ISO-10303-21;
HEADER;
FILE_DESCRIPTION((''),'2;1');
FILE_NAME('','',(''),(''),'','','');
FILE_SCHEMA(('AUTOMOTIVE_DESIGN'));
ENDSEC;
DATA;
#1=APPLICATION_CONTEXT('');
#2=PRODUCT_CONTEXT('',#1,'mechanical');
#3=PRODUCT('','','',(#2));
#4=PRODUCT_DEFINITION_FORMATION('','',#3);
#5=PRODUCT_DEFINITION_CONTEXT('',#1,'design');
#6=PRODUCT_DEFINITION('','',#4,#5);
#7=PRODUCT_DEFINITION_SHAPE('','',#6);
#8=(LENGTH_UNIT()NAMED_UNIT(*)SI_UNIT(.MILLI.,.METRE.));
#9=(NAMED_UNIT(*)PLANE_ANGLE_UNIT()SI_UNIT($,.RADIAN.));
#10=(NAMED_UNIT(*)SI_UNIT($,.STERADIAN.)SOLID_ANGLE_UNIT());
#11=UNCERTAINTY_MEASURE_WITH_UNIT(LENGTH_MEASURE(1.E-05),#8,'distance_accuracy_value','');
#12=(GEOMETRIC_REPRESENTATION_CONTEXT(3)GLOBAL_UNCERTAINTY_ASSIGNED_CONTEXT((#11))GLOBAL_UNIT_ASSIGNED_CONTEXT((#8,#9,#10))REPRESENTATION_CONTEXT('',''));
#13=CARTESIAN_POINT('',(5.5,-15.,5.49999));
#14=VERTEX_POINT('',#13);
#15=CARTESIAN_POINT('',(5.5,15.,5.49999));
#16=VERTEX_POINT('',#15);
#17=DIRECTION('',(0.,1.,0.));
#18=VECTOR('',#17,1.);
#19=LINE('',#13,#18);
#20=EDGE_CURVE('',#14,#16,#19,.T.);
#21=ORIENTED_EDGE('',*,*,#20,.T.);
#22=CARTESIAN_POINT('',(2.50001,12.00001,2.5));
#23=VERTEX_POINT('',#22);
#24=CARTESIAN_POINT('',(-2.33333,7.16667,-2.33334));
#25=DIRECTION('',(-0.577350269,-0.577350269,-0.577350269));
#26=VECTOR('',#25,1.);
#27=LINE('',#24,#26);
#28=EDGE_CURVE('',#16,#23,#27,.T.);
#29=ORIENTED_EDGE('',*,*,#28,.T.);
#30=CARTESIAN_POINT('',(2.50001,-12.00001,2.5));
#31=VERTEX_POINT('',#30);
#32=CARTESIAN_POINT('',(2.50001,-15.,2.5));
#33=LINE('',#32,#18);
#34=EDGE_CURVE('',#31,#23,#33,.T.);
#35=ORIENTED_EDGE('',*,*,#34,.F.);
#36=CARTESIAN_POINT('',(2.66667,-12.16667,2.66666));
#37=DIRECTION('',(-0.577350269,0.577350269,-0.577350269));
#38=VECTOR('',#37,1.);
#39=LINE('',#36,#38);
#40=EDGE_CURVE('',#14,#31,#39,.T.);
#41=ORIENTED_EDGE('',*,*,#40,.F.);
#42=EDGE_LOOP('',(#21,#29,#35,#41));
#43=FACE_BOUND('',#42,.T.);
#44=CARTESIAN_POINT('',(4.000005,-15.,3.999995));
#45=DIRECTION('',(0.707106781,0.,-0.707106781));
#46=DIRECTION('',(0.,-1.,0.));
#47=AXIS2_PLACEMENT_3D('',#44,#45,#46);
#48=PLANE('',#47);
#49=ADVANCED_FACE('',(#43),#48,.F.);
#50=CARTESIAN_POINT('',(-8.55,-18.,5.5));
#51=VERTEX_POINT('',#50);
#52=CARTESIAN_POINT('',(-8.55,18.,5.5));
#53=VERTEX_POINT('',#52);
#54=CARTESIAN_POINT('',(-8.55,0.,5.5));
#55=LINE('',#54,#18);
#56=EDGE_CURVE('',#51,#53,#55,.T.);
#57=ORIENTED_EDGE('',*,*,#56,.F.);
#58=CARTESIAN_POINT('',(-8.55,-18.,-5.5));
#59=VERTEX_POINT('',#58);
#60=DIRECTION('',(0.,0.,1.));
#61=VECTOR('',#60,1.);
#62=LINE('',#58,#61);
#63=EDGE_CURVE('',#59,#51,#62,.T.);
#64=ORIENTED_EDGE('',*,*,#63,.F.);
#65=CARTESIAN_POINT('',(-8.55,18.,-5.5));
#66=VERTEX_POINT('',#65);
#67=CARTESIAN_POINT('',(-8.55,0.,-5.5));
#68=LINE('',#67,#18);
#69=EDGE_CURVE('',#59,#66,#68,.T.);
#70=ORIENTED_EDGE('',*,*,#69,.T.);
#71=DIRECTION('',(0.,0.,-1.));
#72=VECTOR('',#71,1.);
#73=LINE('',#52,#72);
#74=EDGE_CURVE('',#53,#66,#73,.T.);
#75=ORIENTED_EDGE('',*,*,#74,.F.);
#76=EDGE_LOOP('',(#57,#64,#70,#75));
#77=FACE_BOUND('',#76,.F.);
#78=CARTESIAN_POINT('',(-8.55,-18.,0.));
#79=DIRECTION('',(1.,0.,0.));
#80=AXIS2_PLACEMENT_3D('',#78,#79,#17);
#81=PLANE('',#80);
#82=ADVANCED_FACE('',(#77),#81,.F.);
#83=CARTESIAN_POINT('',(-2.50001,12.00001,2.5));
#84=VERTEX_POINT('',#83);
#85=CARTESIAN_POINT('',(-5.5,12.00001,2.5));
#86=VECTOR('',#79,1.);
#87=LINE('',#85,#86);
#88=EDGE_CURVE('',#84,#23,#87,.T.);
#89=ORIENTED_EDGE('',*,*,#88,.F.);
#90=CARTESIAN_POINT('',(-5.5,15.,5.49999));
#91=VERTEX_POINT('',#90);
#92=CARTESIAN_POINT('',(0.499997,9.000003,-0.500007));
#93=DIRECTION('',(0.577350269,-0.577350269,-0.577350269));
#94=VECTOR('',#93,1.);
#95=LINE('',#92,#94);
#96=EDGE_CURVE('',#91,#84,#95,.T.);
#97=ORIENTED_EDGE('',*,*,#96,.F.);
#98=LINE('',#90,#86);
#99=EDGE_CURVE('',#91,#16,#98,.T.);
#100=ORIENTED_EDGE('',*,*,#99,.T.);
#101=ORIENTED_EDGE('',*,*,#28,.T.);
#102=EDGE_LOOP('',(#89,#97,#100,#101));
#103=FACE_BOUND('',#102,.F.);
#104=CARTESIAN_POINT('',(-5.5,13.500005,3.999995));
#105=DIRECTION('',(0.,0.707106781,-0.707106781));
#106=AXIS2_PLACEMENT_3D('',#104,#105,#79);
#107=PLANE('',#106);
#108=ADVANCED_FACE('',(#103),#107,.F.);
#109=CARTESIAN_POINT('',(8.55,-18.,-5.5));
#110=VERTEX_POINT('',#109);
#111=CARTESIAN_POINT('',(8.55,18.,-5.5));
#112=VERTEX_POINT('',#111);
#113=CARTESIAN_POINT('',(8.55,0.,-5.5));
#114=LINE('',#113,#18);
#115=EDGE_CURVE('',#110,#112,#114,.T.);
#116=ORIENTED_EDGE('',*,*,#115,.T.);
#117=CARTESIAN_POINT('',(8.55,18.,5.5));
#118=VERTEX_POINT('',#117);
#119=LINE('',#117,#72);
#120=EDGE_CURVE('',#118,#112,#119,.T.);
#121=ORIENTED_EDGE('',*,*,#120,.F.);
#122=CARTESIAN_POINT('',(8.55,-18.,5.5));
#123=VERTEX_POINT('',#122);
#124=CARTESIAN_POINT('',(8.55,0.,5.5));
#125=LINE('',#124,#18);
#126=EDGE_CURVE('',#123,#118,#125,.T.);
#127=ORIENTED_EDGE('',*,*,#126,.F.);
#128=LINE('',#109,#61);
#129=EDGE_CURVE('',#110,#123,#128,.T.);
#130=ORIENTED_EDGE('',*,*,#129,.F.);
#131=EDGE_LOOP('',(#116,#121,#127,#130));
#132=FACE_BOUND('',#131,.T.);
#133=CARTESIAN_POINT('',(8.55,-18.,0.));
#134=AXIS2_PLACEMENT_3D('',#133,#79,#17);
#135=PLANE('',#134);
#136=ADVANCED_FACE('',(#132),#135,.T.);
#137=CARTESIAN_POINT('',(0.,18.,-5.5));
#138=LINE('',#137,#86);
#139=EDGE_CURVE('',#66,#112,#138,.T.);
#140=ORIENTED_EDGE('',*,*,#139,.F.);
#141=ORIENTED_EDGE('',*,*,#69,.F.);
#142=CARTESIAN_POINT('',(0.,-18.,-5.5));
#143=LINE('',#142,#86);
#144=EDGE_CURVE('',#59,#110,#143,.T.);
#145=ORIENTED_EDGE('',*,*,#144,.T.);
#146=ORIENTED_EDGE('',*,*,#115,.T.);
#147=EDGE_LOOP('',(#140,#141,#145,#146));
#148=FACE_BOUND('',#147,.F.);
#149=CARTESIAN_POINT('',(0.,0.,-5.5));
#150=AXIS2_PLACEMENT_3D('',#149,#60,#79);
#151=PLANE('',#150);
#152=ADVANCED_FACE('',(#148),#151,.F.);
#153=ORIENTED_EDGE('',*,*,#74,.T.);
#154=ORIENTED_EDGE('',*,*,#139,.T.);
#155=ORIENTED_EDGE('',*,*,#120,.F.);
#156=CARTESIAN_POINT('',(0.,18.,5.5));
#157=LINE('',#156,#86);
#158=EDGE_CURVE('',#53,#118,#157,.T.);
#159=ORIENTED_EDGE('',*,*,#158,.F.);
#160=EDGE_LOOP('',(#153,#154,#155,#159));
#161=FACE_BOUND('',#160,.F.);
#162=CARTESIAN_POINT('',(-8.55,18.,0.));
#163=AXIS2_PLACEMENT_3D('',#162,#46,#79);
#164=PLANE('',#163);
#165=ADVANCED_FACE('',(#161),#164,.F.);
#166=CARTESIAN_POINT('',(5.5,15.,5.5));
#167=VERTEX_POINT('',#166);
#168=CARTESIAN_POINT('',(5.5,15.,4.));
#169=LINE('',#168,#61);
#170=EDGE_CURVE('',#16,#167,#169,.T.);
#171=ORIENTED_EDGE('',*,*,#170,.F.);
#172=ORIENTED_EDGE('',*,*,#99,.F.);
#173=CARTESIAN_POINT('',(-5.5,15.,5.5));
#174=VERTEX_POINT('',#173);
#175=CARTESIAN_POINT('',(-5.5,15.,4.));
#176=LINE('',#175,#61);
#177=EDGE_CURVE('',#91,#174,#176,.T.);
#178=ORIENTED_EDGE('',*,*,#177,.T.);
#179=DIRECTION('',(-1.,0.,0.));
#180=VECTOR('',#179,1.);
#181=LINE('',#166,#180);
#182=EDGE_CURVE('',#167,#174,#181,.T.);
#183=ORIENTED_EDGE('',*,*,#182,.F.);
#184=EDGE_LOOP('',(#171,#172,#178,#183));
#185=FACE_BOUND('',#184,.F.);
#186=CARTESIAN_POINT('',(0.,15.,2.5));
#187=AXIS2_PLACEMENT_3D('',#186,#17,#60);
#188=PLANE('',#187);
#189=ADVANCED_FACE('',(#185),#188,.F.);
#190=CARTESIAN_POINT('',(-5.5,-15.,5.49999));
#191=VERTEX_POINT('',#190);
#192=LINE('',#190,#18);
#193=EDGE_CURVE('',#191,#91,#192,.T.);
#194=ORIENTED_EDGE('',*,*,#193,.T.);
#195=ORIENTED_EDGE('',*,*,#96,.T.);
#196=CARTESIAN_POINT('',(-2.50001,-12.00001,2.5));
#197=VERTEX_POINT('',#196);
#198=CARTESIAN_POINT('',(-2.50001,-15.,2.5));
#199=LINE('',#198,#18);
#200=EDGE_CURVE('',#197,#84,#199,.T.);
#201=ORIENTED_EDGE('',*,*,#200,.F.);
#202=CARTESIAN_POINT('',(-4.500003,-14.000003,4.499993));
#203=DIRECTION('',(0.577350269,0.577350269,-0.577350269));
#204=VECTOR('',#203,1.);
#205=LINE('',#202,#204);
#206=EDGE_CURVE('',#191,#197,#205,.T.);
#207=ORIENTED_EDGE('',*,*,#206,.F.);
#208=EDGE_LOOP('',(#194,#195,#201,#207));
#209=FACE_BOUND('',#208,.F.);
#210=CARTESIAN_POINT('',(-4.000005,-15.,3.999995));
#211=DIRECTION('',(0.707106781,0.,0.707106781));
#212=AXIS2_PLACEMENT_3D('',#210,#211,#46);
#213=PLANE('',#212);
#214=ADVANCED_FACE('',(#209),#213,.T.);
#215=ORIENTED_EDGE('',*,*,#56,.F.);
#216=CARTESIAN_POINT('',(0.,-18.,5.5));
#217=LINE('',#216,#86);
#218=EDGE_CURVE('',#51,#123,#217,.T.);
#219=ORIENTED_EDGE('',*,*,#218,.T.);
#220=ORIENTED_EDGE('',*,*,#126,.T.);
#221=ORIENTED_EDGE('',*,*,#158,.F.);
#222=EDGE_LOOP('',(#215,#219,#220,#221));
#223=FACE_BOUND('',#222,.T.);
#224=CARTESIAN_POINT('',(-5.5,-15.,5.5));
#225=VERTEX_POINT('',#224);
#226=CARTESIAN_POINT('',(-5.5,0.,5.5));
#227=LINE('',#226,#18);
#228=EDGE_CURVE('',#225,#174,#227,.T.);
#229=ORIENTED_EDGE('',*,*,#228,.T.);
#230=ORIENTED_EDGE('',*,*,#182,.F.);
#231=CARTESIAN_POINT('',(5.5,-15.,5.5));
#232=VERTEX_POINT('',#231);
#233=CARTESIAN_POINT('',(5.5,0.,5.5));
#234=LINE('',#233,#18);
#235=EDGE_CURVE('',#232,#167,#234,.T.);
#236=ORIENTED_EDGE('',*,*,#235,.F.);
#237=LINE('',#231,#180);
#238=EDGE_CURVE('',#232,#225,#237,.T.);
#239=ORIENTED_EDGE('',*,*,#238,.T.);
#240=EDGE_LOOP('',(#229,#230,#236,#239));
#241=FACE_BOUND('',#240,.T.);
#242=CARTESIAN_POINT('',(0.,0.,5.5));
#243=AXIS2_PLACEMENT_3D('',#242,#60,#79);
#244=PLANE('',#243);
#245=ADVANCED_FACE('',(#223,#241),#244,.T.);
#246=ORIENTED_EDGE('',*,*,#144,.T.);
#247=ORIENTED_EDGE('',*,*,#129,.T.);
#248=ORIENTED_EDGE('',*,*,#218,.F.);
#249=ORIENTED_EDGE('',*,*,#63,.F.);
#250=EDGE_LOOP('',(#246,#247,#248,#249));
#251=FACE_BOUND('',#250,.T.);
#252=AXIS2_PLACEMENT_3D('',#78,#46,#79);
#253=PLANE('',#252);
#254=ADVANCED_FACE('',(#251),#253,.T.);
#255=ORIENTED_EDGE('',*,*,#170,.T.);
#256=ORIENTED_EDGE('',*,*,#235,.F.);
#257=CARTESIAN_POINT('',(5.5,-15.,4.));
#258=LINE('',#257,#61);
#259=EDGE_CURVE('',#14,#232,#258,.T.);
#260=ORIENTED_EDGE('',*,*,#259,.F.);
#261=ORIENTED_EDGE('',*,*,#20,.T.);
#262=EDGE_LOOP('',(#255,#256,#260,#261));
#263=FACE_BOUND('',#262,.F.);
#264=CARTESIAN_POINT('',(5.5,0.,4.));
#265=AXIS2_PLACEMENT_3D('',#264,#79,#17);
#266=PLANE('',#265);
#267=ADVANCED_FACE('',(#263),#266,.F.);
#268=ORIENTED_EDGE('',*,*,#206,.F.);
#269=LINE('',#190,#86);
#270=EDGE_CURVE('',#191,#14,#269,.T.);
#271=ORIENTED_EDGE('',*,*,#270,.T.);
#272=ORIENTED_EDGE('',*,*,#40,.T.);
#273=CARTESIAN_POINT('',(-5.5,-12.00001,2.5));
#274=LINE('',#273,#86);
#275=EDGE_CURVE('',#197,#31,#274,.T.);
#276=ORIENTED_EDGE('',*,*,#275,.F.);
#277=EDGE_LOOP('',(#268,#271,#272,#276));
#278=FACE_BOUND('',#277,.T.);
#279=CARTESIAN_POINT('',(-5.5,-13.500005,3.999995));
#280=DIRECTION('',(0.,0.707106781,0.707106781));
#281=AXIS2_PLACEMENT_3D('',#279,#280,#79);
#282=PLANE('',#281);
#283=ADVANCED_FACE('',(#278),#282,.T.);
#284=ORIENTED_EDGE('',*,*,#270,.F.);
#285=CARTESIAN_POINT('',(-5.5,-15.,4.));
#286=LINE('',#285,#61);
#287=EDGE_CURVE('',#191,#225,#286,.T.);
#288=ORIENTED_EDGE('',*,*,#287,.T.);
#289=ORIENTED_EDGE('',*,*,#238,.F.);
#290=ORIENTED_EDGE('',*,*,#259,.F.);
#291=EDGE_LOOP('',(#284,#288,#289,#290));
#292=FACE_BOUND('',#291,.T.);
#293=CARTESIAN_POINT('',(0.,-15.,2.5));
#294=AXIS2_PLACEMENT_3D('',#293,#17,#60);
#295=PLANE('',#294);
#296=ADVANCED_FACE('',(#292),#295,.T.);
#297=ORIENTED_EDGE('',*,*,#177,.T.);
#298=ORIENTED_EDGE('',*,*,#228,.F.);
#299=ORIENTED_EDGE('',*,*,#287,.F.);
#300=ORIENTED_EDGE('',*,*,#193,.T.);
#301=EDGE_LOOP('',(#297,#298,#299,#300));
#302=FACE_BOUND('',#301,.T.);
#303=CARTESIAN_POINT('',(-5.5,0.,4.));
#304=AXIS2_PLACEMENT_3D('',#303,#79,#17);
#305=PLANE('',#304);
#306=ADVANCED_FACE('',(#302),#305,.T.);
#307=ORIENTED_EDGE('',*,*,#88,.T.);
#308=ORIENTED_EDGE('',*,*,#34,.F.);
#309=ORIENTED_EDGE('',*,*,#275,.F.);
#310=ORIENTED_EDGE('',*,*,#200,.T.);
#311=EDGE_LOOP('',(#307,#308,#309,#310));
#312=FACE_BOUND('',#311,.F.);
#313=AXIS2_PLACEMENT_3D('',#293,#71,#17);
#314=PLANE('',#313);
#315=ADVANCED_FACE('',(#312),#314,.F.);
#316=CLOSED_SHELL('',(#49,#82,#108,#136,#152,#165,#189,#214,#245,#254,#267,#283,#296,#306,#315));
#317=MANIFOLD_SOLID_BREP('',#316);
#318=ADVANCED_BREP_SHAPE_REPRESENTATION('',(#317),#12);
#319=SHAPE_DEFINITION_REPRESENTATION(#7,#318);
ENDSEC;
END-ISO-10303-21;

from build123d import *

# Parameters (mm, degrees)
F3_W     = 17.1
F3_H     = 36
F0_DEPTH = 5.5
F4_W     = 30
F4_H     = 3
F1_DEPTH = 5.5
F2_SIZE  = 2.99999


# Not quite as in the source:
# - a fillet or chamfer is up to 0.001 mm smaller than in the source, because OpenCascade refuses the exact size


with BuildPart() as f0:
    # F3 (on Top) → F0 (new body, symmetric)
    with BuildSketch(Plane.XY):
        Rectangle(F3_W, F3_H)
    extrude(amount=F0_DEPTH, both=True)

    # F4 (on Right) → F1 (cut, symmetric)
    with BuildSketch(Plane.YZ):
        with Locations((0, 4)):
            Rectangle(F4_W, F4_H)
    extrude(amount=F1_DEPTH, both=True, mode=Mode.SUBTRACT)

    # F2 (size 3 in the source; OpenCascade refuses exactly that, so slightly less here)
    f2_edges = [f0.edges().sort_by_distance(p)[0] for p in [
        (-5.5, 0, 2.5),
        (0, -15, 2.5),
        (0, 15, 2.5),
        (5.5, 0, 2.5),
    ]]
    chamfer(f2_edges, length=F2_SIZE)


solid = f0.part
